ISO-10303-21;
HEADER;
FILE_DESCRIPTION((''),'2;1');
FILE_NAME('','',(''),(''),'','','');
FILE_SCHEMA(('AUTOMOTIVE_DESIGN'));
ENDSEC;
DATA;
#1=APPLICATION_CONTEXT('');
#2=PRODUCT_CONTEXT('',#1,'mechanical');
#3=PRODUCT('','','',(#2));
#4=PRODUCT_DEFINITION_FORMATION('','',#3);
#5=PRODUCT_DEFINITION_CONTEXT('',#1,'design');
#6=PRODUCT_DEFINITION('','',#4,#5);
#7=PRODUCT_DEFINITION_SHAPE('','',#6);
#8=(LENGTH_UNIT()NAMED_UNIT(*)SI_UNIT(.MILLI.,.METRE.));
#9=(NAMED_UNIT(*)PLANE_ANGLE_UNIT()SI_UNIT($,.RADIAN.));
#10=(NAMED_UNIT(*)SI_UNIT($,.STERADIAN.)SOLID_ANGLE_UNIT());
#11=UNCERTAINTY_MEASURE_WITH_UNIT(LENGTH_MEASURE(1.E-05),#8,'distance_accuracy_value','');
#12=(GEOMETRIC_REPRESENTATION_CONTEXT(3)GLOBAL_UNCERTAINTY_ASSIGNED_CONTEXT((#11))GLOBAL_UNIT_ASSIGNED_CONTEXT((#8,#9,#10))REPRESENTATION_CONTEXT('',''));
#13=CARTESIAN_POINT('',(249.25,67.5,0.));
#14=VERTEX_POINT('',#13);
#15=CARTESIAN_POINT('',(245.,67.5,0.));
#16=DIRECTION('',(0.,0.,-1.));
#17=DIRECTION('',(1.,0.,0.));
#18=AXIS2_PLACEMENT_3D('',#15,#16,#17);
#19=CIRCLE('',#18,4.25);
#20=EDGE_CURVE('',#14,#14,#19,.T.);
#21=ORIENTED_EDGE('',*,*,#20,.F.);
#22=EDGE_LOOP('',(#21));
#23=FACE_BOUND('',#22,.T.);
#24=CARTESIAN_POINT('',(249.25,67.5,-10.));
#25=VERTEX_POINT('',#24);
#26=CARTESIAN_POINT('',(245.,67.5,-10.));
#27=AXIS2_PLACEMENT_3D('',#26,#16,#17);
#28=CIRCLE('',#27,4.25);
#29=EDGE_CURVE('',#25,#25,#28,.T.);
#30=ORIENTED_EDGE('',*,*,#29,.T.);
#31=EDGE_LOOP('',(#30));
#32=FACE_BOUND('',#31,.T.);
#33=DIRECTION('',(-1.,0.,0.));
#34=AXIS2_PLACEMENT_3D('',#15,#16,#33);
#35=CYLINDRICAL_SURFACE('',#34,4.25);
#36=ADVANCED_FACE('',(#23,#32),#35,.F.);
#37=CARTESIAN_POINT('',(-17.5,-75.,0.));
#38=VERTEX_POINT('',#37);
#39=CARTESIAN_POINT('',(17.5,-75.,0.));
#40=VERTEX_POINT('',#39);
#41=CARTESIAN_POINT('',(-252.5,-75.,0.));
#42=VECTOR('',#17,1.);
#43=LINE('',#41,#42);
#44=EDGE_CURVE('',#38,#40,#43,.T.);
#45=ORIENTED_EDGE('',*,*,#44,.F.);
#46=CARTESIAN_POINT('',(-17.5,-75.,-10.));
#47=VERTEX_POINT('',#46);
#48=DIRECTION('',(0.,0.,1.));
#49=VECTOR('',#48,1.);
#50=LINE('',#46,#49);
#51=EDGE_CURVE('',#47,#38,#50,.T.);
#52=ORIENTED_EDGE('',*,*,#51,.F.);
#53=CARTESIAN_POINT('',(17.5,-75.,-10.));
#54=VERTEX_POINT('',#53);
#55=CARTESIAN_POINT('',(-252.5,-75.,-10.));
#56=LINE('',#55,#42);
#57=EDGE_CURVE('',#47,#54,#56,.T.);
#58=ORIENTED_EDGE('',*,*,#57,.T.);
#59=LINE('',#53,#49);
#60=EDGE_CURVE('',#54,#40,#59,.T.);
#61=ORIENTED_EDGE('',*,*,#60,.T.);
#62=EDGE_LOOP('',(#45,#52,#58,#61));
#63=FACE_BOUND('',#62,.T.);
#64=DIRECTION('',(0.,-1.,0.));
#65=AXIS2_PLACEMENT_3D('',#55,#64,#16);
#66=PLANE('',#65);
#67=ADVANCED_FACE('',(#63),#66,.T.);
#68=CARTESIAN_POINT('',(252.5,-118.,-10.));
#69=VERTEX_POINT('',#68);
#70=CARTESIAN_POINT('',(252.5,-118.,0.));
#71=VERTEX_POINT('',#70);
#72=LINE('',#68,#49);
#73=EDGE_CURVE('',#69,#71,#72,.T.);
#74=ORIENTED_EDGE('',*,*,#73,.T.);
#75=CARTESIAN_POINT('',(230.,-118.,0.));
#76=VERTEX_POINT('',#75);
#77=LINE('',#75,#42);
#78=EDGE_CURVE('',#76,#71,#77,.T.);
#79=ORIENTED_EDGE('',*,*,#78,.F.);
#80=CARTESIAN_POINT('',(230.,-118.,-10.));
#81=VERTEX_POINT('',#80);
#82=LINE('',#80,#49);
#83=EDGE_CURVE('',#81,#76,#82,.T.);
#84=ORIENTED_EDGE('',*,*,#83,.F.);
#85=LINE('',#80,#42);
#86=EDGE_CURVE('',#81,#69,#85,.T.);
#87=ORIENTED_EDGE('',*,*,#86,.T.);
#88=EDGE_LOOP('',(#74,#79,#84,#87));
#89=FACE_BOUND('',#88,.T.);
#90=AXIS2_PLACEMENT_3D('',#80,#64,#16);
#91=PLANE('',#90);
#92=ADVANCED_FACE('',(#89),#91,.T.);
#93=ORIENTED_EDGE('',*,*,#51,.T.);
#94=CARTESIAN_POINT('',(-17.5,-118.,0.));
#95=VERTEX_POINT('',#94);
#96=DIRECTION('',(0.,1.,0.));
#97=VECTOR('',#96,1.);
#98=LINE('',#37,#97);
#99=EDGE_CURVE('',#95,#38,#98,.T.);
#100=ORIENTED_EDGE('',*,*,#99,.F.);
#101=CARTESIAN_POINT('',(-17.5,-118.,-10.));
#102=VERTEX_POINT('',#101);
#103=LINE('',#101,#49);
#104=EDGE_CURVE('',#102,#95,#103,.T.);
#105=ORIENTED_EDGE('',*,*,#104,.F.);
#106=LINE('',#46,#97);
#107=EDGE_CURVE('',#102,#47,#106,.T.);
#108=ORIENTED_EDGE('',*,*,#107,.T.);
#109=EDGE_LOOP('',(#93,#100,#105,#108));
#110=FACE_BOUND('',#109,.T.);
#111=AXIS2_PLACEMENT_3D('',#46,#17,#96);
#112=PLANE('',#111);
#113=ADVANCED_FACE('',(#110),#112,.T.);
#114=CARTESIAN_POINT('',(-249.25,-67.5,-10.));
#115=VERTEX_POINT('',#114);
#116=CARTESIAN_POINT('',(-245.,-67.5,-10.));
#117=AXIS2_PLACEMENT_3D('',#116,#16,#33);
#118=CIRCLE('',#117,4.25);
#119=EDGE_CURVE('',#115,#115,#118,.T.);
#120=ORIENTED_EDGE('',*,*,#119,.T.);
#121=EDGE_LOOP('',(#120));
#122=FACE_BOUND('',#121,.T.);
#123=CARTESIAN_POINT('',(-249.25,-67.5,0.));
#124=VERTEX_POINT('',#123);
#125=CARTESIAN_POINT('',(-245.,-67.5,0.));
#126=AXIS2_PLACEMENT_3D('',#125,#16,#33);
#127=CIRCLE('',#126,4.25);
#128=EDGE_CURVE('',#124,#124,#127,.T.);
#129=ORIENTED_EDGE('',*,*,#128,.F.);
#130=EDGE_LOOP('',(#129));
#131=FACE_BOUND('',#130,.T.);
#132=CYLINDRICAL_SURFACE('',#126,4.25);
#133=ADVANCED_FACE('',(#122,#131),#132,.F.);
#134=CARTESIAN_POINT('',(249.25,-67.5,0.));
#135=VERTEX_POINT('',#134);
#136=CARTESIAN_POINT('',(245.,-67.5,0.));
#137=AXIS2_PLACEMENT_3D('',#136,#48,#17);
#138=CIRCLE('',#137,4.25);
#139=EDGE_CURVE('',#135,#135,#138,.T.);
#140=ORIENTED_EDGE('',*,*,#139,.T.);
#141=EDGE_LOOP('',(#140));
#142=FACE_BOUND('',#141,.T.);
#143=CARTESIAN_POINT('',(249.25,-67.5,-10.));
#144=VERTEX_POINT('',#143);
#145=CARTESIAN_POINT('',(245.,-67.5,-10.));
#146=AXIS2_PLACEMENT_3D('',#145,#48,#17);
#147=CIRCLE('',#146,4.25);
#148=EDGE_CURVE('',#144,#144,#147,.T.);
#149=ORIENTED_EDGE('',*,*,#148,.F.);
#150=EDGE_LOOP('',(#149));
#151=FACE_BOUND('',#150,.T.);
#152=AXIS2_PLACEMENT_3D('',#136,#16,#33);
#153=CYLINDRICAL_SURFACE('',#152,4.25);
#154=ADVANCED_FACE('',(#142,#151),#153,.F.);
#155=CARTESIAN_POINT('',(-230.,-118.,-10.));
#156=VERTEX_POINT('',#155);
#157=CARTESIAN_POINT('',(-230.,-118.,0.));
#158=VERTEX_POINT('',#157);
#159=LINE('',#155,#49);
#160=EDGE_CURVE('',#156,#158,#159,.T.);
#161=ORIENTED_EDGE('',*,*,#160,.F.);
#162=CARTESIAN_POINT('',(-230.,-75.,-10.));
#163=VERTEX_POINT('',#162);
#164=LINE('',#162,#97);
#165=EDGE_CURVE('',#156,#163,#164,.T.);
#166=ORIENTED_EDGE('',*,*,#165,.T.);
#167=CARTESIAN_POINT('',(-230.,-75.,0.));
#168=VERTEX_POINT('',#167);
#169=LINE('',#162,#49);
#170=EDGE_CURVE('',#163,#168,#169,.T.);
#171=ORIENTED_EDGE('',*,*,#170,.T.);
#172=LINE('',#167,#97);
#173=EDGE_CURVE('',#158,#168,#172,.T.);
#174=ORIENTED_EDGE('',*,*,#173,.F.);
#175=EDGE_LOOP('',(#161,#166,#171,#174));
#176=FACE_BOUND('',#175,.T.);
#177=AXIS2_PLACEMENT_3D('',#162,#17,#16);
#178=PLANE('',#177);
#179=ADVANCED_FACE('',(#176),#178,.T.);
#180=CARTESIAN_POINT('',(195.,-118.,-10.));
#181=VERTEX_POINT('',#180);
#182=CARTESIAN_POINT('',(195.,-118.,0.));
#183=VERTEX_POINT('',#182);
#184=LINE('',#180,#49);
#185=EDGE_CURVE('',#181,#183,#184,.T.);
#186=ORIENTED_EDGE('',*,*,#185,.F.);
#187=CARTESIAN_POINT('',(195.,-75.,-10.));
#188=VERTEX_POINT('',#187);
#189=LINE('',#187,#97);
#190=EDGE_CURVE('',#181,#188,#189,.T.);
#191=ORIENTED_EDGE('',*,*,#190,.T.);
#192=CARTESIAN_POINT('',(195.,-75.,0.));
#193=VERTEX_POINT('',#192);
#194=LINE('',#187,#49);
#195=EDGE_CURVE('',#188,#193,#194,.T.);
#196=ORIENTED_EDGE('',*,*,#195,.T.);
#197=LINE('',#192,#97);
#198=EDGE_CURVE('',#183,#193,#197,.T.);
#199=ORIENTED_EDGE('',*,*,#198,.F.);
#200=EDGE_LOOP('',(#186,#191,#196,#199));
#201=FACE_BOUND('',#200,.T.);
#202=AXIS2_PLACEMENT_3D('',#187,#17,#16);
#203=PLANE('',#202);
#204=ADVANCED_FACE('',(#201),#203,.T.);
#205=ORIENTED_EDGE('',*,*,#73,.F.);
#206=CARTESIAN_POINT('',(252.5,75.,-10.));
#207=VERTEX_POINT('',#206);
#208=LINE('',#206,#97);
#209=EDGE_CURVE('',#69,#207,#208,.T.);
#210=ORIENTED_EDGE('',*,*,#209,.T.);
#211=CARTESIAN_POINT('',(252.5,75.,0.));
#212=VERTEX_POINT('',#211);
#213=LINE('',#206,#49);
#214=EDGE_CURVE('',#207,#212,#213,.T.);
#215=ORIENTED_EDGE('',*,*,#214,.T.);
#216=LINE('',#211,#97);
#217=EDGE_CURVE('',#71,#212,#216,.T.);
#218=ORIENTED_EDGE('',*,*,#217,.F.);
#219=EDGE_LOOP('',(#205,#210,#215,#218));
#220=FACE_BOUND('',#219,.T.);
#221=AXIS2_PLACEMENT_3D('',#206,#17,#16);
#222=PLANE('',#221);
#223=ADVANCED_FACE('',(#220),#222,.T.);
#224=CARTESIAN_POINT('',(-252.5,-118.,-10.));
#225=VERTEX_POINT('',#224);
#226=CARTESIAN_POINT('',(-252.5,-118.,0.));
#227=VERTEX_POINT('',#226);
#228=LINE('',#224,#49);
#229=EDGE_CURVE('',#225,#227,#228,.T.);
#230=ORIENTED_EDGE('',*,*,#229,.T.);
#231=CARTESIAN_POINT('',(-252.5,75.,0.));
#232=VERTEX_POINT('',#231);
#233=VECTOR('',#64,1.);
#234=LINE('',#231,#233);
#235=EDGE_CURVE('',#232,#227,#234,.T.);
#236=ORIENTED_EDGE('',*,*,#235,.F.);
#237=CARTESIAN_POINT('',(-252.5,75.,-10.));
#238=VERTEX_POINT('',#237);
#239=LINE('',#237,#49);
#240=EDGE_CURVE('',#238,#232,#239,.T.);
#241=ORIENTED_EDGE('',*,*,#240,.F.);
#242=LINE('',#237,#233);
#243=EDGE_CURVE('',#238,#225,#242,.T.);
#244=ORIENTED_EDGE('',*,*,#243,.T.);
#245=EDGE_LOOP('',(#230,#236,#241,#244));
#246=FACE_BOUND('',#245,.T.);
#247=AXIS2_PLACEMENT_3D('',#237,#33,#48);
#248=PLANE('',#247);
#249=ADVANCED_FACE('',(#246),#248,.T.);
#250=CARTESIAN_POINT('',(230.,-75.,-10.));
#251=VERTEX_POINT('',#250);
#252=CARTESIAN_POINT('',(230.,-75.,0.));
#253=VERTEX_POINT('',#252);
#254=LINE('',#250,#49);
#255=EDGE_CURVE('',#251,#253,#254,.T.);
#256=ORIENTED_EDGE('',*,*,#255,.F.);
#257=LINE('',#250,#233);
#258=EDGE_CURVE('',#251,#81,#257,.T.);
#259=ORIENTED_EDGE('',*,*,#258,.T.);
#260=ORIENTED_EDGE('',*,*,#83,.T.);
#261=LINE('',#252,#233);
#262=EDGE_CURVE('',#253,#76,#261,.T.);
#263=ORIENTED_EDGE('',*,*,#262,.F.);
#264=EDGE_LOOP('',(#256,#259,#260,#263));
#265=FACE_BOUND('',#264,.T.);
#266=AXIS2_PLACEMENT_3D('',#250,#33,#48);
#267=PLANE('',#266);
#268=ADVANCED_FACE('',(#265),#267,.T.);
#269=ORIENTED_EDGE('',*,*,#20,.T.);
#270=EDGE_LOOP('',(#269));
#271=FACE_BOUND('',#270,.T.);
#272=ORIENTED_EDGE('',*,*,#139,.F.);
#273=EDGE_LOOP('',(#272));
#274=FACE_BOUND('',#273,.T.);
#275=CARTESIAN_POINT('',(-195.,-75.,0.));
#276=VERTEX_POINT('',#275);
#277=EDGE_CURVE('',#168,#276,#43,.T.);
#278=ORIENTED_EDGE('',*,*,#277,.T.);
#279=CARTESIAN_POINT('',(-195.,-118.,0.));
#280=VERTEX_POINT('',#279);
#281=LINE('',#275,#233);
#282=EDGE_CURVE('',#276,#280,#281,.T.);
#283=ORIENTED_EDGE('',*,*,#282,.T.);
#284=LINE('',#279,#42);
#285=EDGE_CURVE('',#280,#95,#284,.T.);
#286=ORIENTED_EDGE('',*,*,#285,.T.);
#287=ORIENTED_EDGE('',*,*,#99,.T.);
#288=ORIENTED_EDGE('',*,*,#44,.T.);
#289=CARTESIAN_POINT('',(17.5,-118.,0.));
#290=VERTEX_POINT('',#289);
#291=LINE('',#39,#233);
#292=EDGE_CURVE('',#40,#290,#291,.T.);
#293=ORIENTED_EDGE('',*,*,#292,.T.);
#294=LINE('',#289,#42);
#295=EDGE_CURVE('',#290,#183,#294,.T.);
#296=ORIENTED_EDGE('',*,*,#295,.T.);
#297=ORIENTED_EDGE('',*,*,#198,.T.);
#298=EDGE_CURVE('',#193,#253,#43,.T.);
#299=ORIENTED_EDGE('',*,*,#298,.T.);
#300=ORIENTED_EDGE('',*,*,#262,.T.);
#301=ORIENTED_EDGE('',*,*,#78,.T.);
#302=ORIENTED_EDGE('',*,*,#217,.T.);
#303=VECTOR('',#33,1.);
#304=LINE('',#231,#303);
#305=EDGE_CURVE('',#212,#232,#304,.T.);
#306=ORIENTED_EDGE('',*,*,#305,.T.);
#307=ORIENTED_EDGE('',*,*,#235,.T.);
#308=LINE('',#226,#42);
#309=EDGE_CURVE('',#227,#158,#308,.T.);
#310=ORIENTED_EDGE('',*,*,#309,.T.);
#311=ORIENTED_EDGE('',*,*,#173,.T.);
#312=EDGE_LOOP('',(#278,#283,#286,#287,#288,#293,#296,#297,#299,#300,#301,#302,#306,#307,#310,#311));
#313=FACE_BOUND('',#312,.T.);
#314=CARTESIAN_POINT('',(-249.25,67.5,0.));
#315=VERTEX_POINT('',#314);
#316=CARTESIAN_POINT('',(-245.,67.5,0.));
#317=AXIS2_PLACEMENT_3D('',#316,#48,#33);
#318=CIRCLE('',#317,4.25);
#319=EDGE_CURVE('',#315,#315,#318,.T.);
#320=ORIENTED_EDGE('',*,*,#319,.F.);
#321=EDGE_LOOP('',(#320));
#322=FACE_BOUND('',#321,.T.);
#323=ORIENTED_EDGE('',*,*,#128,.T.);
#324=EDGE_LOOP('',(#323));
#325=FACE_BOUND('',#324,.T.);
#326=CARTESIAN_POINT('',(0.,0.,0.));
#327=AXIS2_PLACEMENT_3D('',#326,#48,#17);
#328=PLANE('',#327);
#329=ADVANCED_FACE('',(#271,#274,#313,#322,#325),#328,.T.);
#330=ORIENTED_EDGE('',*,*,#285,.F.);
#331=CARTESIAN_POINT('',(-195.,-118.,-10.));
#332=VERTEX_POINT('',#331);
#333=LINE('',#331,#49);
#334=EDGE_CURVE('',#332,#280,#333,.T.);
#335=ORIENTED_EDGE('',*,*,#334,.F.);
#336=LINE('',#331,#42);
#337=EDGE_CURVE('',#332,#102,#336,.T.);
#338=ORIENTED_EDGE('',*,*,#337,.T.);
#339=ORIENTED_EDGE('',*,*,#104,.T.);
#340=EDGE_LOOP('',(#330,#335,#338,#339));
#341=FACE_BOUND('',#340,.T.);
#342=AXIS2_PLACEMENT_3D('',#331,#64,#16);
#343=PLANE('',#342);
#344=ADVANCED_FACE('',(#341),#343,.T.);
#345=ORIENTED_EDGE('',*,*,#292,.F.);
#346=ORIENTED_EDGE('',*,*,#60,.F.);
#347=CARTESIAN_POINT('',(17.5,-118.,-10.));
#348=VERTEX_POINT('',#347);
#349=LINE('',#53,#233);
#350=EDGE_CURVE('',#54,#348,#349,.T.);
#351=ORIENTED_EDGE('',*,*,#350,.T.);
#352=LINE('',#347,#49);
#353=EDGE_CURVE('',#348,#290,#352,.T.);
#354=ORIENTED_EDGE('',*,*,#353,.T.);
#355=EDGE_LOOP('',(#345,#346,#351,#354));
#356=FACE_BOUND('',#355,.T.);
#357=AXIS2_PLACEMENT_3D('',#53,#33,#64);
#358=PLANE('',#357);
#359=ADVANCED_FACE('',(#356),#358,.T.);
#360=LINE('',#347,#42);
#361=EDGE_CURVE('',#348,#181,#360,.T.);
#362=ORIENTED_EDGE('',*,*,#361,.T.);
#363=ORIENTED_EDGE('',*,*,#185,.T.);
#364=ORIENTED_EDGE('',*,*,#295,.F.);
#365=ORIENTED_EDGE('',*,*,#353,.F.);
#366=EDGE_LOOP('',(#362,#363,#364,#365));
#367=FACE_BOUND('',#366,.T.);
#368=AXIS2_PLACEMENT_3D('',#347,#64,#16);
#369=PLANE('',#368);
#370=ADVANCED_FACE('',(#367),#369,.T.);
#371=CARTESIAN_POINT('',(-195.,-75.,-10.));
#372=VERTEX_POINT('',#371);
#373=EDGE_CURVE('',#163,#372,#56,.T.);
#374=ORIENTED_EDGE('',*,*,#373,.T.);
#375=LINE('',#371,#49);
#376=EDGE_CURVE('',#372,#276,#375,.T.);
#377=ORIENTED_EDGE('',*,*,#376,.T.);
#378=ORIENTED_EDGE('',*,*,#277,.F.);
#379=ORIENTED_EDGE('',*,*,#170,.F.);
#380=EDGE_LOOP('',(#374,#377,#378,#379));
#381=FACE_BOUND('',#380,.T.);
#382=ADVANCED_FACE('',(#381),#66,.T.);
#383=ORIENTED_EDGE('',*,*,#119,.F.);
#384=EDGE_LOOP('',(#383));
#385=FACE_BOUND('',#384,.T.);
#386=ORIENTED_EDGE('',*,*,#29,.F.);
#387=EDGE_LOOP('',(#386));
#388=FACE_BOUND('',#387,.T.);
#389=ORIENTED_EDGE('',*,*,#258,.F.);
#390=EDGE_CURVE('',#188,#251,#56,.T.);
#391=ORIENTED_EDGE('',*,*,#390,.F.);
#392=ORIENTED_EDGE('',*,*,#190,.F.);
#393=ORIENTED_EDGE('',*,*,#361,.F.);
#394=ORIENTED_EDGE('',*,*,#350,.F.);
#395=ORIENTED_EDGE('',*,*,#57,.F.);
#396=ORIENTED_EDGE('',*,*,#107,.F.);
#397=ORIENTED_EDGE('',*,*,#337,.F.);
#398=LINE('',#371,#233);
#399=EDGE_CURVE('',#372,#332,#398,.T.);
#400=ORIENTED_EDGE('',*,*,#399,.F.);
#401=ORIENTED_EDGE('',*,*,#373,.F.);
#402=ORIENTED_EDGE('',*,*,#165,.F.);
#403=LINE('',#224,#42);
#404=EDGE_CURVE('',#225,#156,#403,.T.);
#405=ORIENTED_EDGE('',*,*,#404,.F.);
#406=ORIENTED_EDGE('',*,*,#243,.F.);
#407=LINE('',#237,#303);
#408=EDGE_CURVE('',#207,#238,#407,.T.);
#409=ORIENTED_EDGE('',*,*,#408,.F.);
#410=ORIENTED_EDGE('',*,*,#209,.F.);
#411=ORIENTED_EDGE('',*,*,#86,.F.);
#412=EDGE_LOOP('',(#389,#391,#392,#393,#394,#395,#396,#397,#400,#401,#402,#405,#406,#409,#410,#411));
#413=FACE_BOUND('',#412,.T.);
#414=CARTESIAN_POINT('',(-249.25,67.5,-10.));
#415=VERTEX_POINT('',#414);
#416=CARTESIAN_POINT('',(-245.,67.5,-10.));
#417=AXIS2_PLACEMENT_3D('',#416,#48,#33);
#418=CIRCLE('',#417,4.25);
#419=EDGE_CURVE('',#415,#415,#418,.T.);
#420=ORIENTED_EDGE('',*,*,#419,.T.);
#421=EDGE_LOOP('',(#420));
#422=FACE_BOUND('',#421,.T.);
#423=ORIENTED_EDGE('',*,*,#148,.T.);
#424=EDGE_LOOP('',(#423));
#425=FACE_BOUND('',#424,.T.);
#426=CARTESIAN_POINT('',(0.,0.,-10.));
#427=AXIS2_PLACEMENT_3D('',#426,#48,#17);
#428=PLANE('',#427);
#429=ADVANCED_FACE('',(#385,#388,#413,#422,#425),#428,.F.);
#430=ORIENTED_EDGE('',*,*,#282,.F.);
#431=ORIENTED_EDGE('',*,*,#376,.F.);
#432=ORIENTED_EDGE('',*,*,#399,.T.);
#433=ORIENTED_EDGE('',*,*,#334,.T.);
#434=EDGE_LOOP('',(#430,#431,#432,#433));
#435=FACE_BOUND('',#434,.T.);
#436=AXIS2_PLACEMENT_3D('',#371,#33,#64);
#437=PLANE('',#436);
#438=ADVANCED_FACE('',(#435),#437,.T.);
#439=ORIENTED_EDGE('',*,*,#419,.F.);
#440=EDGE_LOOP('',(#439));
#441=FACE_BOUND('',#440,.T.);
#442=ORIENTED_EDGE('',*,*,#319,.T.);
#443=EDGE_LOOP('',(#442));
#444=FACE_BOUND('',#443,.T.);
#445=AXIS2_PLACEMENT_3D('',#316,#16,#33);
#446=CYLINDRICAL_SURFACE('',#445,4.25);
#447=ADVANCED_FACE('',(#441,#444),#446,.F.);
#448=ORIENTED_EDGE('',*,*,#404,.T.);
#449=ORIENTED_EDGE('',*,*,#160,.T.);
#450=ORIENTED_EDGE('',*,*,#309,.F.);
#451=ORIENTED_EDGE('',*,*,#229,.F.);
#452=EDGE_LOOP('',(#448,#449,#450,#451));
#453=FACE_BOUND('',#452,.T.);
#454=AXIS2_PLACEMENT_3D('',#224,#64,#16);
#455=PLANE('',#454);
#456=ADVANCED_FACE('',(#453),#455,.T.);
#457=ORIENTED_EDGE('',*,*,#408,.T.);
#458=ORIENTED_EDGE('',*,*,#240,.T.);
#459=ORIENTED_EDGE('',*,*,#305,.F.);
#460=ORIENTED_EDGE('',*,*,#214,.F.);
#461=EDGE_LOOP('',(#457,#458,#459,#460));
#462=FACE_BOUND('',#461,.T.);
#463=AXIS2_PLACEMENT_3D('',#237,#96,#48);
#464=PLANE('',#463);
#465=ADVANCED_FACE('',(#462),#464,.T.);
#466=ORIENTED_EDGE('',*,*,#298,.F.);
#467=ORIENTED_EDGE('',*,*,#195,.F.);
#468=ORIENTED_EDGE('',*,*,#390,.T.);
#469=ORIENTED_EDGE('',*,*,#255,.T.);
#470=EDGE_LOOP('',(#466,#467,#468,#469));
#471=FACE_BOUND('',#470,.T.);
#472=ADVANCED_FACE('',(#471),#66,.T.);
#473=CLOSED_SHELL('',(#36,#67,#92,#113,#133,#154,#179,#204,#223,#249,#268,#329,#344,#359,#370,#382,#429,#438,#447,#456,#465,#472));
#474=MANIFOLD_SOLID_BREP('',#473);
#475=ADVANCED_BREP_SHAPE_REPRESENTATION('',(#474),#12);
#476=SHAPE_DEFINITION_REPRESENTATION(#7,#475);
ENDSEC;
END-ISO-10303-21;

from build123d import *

# Parameters (mm, degrees)
IZIM1_W                   = 505
IZIM1_H                   = 150
TABAN_FLAN_1_DEPTH        = 10
IZIM6_R                   = 4.25
KES_EKSTR_ZYON1_DEPTH     = 264.592962729
AYNALAMA2_COPY_1_SKETCH_R = 4.25
AYNALAMA2_COPY_1_DEPTH    = 264.592962729
IZIM7_W                   = 22.5
IZIM7_H                   = 43
IZIM7_W_2                 = 177.5
SEKME1_DEPTH              = 10


# Sheet-metal steps are written as plain solids
with BuildPart() as part:
    # Çizim1 → Taban-Flanş1 (new body)
    with BuildSketch(Plane.XY):
        Rectangle(IZIM1_W, IZIM1_H)
    extrude(amount=-TABAN_FLAN_1_DEPTH)

    # Çizim6 → Kes-Ekstrüzyon1 (cut, through all)
    with BuildSketch(Plane(origin=(0, 0, -10), x_dir=(-1, 0, 0), z_dir=(0, 0, -1))):
        with Locations((245, -67.5)):
            Circle(IZIM6_R)
    kes_ekstr_zyon1 = extrude(amount=-KES_EKSTR_ZYON1_DEPTH, mode=Mode.SUBTRACT)

    # Aynalama1: Kes-Ekstrüzyon1 across plane
    add(kes_ekstr_zyon1.mirror(Plane(origin=(0, 0, 0), x_dir=(0, 0, 1), z_dir=(1, 0, 0))), mode=Mode.SUBTRACT)

    # Aynalama2: Kes-Ekstrüzyon1 across plane
    add(kes_ekstr_zyon1.mirror(Plane.ZX), mode=Mode.SUBTRACT)

    # Aynalama2 copy 1 sketch → Aynalama2 copy 1 (cut, through all)
    with BuildSketch(Plane(origin=(0, 0, -10), x_dir=(1, 0, 0), z_dir=(0, 0, -1))):
        with Locations((245, -67.5)):
            Circle(AYNALAMA2_COPY_1_SKETCH_R)
    extrude(amount=-AYNALAMA2_COPY_1_DEPTH, mode=Mode.SUBTRACT)

    # Çizim7 → Sekme1 (add)
    with BuildSketch(Plane.XY):
        with Locations((-241.25, -96.5)):
            Rectangle(IZIM7_W, IZIM7_H)
        with Locations((-106.25, -96.5)):
            Rectangle(IZIM7_W_2, IZIM7_H)
        with Locations((106.25, -96.5)):
            Rectangle(IZIM7_W_2, IZIM7_H)
        with Locations((241.25, -96.5)):
            Rectangle(IZIM7_W, IZIM7_H)
    extrude(amount=-SEKME1_DEPTH)


solid = part.part
